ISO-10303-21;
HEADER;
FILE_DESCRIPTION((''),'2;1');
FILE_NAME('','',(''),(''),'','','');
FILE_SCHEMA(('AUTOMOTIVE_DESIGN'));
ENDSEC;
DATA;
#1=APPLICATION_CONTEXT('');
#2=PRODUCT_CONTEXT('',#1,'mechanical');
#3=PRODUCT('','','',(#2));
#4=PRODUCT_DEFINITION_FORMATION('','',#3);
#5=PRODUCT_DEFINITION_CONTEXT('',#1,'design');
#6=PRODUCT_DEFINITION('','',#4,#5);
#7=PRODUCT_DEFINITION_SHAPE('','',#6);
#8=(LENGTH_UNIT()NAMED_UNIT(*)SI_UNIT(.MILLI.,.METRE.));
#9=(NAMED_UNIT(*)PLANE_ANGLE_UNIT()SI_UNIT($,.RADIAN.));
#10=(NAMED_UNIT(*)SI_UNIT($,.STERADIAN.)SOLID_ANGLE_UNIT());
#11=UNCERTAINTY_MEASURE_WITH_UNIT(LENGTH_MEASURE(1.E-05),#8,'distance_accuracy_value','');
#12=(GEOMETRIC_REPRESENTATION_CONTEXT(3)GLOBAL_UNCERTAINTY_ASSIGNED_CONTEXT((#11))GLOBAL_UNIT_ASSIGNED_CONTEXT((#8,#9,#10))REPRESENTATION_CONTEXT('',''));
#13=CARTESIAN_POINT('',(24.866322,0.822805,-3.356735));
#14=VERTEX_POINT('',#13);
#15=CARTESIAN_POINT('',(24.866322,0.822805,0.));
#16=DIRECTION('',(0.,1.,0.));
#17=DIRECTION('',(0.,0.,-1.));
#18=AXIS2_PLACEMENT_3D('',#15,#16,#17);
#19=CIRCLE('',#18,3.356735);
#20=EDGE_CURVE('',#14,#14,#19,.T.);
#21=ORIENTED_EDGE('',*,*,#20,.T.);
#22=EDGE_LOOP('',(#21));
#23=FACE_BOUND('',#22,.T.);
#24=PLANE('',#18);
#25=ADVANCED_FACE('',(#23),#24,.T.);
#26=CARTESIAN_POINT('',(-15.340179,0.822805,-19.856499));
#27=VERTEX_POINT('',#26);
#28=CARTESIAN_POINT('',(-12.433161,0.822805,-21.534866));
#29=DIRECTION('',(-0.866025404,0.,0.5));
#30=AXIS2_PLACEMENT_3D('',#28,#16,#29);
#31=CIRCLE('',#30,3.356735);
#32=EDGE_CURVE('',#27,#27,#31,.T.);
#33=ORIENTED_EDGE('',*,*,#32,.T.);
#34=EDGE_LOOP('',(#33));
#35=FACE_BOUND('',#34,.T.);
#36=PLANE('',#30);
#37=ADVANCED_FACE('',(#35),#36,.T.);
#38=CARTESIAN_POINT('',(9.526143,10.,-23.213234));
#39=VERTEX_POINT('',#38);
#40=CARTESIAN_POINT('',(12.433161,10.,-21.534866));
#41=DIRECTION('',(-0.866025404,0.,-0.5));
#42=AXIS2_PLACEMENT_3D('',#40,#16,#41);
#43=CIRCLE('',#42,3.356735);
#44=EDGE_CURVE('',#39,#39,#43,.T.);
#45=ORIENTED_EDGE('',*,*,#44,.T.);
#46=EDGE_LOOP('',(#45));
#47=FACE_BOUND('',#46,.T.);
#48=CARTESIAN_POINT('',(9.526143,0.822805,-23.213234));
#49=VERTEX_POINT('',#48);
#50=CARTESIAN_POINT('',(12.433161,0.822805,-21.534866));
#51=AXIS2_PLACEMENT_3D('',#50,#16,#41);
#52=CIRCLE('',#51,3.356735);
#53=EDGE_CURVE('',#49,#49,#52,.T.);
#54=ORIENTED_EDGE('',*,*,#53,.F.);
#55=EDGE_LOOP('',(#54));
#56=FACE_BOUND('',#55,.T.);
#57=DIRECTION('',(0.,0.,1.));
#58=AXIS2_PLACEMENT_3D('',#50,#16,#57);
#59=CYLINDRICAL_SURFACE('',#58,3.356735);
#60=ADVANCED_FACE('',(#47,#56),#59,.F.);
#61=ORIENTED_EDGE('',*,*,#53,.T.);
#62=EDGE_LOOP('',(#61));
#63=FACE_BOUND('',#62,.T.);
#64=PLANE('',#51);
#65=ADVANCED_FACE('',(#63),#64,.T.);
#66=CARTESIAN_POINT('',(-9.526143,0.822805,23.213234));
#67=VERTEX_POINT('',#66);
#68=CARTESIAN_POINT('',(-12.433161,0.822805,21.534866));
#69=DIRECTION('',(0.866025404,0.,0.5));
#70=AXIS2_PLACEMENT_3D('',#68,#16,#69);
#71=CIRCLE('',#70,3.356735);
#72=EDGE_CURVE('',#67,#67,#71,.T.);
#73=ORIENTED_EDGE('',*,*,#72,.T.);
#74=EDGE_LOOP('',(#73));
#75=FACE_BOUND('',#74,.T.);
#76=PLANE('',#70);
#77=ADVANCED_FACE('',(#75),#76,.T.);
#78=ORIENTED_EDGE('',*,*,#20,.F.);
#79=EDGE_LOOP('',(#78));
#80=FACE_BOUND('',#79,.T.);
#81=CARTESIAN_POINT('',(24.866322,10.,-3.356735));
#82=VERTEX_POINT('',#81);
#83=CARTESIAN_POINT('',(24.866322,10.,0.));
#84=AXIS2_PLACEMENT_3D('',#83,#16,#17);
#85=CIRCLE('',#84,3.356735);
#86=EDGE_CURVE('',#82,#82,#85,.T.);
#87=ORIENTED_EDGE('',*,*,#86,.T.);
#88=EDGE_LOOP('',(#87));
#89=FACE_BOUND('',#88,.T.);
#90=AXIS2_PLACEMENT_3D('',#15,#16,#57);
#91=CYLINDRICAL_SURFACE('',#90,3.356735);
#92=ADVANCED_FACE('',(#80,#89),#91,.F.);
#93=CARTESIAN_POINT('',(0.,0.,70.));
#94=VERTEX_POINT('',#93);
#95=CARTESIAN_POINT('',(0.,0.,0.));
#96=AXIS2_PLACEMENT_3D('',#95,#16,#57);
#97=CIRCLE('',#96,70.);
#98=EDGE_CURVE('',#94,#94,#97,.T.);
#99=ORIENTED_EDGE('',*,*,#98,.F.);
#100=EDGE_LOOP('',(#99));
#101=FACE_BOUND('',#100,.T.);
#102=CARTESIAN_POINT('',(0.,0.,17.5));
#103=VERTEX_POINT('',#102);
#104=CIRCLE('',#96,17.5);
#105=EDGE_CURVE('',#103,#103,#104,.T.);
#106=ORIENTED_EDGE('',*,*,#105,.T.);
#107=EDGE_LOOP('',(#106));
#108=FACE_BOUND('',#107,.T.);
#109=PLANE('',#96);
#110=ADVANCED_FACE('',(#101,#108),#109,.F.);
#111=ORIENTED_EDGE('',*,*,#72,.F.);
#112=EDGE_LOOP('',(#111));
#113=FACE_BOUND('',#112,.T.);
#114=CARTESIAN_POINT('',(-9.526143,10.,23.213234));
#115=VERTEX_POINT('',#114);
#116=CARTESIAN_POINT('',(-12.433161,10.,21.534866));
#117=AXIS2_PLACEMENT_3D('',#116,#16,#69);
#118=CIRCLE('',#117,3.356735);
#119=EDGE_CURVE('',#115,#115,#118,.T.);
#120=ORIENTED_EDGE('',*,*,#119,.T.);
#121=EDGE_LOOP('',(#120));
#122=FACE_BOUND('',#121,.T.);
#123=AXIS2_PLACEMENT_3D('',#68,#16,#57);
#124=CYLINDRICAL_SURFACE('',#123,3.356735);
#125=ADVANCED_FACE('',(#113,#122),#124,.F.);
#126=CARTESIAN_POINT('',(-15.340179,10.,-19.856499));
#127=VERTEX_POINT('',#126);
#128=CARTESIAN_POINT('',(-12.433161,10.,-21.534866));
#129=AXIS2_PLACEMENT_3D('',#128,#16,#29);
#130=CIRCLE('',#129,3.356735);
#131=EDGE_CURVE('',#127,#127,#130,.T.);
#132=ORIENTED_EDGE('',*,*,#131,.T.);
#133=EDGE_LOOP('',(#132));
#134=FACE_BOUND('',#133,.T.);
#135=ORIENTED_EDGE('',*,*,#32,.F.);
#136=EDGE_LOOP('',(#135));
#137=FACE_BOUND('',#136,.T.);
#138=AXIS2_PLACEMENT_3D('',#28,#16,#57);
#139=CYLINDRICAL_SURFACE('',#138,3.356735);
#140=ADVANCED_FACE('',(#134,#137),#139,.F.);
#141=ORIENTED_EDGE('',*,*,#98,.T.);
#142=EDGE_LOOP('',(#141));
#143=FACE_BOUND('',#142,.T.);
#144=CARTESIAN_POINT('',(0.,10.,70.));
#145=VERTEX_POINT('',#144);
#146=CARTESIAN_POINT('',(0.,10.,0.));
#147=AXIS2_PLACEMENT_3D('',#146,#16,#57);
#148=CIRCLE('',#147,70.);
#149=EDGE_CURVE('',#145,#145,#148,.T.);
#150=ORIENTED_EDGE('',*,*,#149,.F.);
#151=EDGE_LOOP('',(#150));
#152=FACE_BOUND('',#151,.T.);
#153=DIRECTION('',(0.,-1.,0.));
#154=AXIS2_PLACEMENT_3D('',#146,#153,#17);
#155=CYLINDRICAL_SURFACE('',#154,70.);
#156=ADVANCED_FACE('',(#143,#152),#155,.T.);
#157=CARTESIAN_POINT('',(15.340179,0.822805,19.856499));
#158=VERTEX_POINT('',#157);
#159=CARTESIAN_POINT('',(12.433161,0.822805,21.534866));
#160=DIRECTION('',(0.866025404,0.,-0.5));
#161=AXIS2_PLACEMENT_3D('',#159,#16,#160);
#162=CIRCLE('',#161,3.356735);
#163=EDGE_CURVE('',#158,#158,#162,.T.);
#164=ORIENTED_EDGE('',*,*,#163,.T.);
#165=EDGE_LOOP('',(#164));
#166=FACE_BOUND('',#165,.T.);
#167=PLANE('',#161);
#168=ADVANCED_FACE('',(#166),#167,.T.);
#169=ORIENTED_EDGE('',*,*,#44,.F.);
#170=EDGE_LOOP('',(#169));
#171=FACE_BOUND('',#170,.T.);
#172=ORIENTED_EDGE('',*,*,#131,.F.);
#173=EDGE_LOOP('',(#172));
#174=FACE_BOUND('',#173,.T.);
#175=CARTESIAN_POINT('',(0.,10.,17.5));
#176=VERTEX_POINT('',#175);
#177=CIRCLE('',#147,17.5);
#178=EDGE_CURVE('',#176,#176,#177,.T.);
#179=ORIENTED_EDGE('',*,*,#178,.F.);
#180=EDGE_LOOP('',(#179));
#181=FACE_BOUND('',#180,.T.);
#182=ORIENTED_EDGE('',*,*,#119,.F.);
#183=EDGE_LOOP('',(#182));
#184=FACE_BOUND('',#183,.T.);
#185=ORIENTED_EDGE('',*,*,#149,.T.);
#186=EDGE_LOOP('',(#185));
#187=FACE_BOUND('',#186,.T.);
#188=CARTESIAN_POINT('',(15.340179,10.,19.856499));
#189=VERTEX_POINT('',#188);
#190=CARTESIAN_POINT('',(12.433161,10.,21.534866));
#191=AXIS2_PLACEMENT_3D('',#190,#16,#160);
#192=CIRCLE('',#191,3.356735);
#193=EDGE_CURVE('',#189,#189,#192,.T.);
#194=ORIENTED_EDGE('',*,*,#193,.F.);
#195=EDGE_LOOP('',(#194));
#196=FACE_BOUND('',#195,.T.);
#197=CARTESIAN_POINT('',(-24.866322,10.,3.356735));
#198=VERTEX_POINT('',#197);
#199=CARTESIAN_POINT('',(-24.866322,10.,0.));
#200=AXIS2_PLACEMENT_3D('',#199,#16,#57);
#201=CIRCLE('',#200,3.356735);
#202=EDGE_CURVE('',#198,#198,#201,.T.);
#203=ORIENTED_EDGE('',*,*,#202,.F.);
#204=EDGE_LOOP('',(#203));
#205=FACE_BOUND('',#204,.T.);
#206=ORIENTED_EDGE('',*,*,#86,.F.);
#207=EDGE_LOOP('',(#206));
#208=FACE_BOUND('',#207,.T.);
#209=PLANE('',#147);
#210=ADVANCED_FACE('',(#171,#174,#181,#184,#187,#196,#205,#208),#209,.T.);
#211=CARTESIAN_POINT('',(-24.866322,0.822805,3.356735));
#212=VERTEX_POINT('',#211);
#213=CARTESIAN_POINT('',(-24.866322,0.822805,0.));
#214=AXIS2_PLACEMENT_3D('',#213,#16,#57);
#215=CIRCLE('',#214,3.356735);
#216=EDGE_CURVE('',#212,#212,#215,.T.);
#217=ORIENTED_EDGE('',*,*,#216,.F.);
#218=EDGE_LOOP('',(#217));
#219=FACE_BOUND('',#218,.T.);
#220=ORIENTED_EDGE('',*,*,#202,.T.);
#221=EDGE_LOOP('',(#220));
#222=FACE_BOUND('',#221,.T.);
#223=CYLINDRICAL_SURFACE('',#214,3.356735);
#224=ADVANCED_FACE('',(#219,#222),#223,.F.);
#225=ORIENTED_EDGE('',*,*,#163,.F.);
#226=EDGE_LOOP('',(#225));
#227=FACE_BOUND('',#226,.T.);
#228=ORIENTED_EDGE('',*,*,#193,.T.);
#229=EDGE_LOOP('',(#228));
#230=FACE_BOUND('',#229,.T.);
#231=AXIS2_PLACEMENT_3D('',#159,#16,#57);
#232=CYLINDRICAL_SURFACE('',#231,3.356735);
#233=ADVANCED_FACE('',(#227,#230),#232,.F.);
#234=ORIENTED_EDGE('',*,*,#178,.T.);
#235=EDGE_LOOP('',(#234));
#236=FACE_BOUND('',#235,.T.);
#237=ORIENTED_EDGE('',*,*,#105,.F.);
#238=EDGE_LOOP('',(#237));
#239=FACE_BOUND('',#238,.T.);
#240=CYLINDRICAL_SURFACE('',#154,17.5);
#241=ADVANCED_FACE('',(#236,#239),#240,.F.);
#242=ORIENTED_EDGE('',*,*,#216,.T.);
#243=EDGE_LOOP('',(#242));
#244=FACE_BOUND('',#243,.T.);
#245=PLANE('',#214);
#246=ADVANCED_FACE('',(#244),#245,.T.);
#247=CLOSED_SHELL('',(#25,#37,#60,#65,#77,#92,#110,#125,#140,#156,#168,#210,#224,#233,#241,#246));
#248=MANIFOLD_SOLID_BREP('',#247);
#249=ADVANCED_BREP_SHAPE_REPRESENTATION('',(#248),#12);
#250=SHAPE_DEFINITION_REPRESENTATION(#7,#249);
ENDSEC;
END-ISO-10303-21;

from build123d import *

# Parameters (mm, degrees)
SKETCH1_R           = 70
BOSS_EXTRUDE1_DEPTH = 10
SKETCH2_R           = 17.5
CUT_EXTRUDE1_DEPTH  = 100.498743711
SKETCH3_R           = 3.356735111
CUT_EXTRUDE2_DEPTH  = 9.177195483
CIRPATTERN1_COUNT   = 6


with BuildPart() as part:
    # Sketch1 → Boss-Extrude1 (new body)
    with BuildSketch(Plane(origin=(0, 0, 0), x_dir=(1, 0, 0), z_dir=(0, 1, 0))):
        Circle(SKETCH1_R)
    extrude(amount=BOSS_EXTRUDE1_DEPTH)

    # Sketch2 → Cut-Extrude1 (cut, through all)
    with BuildSketch(Plane(origin=(0, 0, 0), x_dir=(1, 0, 0), z_dir=(0, 1, 0))):
        Circle(SKETCH2_R)
    extrude(amount=CUT_EXTRUDE1_DEPTH, mode=Mode.SUBTRACT)

    # Sketch3 → Cut-Extrude2 (cut)
    with BuildSketch(Plane(origin=(0, 10, 0), x_dir=(1, 0, 0), z_dir=(0, 1, 0))):
        with Locations((-24.866321664, 0)):
            Circle(SKETCH3_R)
    cut_extrude2 = extrude(amount=-CUT_EXTRUDE2_DEPTH, mode=Mode.SUBTRACT)

    # CirPattern1: Cut-Extrude2 ×6 about axis
    cirpattern1_axis = Axis((0, 0, 0), (0, 1, 0))
    for i in range(1, CIRPATTERN1_COUNT):
        add(cut_extrude2.rotate(cirpattern1_axis, i * 360 / CIRPATTERN1_COUNT), mode=Mode.SUBTRACT)


solid = part.part
